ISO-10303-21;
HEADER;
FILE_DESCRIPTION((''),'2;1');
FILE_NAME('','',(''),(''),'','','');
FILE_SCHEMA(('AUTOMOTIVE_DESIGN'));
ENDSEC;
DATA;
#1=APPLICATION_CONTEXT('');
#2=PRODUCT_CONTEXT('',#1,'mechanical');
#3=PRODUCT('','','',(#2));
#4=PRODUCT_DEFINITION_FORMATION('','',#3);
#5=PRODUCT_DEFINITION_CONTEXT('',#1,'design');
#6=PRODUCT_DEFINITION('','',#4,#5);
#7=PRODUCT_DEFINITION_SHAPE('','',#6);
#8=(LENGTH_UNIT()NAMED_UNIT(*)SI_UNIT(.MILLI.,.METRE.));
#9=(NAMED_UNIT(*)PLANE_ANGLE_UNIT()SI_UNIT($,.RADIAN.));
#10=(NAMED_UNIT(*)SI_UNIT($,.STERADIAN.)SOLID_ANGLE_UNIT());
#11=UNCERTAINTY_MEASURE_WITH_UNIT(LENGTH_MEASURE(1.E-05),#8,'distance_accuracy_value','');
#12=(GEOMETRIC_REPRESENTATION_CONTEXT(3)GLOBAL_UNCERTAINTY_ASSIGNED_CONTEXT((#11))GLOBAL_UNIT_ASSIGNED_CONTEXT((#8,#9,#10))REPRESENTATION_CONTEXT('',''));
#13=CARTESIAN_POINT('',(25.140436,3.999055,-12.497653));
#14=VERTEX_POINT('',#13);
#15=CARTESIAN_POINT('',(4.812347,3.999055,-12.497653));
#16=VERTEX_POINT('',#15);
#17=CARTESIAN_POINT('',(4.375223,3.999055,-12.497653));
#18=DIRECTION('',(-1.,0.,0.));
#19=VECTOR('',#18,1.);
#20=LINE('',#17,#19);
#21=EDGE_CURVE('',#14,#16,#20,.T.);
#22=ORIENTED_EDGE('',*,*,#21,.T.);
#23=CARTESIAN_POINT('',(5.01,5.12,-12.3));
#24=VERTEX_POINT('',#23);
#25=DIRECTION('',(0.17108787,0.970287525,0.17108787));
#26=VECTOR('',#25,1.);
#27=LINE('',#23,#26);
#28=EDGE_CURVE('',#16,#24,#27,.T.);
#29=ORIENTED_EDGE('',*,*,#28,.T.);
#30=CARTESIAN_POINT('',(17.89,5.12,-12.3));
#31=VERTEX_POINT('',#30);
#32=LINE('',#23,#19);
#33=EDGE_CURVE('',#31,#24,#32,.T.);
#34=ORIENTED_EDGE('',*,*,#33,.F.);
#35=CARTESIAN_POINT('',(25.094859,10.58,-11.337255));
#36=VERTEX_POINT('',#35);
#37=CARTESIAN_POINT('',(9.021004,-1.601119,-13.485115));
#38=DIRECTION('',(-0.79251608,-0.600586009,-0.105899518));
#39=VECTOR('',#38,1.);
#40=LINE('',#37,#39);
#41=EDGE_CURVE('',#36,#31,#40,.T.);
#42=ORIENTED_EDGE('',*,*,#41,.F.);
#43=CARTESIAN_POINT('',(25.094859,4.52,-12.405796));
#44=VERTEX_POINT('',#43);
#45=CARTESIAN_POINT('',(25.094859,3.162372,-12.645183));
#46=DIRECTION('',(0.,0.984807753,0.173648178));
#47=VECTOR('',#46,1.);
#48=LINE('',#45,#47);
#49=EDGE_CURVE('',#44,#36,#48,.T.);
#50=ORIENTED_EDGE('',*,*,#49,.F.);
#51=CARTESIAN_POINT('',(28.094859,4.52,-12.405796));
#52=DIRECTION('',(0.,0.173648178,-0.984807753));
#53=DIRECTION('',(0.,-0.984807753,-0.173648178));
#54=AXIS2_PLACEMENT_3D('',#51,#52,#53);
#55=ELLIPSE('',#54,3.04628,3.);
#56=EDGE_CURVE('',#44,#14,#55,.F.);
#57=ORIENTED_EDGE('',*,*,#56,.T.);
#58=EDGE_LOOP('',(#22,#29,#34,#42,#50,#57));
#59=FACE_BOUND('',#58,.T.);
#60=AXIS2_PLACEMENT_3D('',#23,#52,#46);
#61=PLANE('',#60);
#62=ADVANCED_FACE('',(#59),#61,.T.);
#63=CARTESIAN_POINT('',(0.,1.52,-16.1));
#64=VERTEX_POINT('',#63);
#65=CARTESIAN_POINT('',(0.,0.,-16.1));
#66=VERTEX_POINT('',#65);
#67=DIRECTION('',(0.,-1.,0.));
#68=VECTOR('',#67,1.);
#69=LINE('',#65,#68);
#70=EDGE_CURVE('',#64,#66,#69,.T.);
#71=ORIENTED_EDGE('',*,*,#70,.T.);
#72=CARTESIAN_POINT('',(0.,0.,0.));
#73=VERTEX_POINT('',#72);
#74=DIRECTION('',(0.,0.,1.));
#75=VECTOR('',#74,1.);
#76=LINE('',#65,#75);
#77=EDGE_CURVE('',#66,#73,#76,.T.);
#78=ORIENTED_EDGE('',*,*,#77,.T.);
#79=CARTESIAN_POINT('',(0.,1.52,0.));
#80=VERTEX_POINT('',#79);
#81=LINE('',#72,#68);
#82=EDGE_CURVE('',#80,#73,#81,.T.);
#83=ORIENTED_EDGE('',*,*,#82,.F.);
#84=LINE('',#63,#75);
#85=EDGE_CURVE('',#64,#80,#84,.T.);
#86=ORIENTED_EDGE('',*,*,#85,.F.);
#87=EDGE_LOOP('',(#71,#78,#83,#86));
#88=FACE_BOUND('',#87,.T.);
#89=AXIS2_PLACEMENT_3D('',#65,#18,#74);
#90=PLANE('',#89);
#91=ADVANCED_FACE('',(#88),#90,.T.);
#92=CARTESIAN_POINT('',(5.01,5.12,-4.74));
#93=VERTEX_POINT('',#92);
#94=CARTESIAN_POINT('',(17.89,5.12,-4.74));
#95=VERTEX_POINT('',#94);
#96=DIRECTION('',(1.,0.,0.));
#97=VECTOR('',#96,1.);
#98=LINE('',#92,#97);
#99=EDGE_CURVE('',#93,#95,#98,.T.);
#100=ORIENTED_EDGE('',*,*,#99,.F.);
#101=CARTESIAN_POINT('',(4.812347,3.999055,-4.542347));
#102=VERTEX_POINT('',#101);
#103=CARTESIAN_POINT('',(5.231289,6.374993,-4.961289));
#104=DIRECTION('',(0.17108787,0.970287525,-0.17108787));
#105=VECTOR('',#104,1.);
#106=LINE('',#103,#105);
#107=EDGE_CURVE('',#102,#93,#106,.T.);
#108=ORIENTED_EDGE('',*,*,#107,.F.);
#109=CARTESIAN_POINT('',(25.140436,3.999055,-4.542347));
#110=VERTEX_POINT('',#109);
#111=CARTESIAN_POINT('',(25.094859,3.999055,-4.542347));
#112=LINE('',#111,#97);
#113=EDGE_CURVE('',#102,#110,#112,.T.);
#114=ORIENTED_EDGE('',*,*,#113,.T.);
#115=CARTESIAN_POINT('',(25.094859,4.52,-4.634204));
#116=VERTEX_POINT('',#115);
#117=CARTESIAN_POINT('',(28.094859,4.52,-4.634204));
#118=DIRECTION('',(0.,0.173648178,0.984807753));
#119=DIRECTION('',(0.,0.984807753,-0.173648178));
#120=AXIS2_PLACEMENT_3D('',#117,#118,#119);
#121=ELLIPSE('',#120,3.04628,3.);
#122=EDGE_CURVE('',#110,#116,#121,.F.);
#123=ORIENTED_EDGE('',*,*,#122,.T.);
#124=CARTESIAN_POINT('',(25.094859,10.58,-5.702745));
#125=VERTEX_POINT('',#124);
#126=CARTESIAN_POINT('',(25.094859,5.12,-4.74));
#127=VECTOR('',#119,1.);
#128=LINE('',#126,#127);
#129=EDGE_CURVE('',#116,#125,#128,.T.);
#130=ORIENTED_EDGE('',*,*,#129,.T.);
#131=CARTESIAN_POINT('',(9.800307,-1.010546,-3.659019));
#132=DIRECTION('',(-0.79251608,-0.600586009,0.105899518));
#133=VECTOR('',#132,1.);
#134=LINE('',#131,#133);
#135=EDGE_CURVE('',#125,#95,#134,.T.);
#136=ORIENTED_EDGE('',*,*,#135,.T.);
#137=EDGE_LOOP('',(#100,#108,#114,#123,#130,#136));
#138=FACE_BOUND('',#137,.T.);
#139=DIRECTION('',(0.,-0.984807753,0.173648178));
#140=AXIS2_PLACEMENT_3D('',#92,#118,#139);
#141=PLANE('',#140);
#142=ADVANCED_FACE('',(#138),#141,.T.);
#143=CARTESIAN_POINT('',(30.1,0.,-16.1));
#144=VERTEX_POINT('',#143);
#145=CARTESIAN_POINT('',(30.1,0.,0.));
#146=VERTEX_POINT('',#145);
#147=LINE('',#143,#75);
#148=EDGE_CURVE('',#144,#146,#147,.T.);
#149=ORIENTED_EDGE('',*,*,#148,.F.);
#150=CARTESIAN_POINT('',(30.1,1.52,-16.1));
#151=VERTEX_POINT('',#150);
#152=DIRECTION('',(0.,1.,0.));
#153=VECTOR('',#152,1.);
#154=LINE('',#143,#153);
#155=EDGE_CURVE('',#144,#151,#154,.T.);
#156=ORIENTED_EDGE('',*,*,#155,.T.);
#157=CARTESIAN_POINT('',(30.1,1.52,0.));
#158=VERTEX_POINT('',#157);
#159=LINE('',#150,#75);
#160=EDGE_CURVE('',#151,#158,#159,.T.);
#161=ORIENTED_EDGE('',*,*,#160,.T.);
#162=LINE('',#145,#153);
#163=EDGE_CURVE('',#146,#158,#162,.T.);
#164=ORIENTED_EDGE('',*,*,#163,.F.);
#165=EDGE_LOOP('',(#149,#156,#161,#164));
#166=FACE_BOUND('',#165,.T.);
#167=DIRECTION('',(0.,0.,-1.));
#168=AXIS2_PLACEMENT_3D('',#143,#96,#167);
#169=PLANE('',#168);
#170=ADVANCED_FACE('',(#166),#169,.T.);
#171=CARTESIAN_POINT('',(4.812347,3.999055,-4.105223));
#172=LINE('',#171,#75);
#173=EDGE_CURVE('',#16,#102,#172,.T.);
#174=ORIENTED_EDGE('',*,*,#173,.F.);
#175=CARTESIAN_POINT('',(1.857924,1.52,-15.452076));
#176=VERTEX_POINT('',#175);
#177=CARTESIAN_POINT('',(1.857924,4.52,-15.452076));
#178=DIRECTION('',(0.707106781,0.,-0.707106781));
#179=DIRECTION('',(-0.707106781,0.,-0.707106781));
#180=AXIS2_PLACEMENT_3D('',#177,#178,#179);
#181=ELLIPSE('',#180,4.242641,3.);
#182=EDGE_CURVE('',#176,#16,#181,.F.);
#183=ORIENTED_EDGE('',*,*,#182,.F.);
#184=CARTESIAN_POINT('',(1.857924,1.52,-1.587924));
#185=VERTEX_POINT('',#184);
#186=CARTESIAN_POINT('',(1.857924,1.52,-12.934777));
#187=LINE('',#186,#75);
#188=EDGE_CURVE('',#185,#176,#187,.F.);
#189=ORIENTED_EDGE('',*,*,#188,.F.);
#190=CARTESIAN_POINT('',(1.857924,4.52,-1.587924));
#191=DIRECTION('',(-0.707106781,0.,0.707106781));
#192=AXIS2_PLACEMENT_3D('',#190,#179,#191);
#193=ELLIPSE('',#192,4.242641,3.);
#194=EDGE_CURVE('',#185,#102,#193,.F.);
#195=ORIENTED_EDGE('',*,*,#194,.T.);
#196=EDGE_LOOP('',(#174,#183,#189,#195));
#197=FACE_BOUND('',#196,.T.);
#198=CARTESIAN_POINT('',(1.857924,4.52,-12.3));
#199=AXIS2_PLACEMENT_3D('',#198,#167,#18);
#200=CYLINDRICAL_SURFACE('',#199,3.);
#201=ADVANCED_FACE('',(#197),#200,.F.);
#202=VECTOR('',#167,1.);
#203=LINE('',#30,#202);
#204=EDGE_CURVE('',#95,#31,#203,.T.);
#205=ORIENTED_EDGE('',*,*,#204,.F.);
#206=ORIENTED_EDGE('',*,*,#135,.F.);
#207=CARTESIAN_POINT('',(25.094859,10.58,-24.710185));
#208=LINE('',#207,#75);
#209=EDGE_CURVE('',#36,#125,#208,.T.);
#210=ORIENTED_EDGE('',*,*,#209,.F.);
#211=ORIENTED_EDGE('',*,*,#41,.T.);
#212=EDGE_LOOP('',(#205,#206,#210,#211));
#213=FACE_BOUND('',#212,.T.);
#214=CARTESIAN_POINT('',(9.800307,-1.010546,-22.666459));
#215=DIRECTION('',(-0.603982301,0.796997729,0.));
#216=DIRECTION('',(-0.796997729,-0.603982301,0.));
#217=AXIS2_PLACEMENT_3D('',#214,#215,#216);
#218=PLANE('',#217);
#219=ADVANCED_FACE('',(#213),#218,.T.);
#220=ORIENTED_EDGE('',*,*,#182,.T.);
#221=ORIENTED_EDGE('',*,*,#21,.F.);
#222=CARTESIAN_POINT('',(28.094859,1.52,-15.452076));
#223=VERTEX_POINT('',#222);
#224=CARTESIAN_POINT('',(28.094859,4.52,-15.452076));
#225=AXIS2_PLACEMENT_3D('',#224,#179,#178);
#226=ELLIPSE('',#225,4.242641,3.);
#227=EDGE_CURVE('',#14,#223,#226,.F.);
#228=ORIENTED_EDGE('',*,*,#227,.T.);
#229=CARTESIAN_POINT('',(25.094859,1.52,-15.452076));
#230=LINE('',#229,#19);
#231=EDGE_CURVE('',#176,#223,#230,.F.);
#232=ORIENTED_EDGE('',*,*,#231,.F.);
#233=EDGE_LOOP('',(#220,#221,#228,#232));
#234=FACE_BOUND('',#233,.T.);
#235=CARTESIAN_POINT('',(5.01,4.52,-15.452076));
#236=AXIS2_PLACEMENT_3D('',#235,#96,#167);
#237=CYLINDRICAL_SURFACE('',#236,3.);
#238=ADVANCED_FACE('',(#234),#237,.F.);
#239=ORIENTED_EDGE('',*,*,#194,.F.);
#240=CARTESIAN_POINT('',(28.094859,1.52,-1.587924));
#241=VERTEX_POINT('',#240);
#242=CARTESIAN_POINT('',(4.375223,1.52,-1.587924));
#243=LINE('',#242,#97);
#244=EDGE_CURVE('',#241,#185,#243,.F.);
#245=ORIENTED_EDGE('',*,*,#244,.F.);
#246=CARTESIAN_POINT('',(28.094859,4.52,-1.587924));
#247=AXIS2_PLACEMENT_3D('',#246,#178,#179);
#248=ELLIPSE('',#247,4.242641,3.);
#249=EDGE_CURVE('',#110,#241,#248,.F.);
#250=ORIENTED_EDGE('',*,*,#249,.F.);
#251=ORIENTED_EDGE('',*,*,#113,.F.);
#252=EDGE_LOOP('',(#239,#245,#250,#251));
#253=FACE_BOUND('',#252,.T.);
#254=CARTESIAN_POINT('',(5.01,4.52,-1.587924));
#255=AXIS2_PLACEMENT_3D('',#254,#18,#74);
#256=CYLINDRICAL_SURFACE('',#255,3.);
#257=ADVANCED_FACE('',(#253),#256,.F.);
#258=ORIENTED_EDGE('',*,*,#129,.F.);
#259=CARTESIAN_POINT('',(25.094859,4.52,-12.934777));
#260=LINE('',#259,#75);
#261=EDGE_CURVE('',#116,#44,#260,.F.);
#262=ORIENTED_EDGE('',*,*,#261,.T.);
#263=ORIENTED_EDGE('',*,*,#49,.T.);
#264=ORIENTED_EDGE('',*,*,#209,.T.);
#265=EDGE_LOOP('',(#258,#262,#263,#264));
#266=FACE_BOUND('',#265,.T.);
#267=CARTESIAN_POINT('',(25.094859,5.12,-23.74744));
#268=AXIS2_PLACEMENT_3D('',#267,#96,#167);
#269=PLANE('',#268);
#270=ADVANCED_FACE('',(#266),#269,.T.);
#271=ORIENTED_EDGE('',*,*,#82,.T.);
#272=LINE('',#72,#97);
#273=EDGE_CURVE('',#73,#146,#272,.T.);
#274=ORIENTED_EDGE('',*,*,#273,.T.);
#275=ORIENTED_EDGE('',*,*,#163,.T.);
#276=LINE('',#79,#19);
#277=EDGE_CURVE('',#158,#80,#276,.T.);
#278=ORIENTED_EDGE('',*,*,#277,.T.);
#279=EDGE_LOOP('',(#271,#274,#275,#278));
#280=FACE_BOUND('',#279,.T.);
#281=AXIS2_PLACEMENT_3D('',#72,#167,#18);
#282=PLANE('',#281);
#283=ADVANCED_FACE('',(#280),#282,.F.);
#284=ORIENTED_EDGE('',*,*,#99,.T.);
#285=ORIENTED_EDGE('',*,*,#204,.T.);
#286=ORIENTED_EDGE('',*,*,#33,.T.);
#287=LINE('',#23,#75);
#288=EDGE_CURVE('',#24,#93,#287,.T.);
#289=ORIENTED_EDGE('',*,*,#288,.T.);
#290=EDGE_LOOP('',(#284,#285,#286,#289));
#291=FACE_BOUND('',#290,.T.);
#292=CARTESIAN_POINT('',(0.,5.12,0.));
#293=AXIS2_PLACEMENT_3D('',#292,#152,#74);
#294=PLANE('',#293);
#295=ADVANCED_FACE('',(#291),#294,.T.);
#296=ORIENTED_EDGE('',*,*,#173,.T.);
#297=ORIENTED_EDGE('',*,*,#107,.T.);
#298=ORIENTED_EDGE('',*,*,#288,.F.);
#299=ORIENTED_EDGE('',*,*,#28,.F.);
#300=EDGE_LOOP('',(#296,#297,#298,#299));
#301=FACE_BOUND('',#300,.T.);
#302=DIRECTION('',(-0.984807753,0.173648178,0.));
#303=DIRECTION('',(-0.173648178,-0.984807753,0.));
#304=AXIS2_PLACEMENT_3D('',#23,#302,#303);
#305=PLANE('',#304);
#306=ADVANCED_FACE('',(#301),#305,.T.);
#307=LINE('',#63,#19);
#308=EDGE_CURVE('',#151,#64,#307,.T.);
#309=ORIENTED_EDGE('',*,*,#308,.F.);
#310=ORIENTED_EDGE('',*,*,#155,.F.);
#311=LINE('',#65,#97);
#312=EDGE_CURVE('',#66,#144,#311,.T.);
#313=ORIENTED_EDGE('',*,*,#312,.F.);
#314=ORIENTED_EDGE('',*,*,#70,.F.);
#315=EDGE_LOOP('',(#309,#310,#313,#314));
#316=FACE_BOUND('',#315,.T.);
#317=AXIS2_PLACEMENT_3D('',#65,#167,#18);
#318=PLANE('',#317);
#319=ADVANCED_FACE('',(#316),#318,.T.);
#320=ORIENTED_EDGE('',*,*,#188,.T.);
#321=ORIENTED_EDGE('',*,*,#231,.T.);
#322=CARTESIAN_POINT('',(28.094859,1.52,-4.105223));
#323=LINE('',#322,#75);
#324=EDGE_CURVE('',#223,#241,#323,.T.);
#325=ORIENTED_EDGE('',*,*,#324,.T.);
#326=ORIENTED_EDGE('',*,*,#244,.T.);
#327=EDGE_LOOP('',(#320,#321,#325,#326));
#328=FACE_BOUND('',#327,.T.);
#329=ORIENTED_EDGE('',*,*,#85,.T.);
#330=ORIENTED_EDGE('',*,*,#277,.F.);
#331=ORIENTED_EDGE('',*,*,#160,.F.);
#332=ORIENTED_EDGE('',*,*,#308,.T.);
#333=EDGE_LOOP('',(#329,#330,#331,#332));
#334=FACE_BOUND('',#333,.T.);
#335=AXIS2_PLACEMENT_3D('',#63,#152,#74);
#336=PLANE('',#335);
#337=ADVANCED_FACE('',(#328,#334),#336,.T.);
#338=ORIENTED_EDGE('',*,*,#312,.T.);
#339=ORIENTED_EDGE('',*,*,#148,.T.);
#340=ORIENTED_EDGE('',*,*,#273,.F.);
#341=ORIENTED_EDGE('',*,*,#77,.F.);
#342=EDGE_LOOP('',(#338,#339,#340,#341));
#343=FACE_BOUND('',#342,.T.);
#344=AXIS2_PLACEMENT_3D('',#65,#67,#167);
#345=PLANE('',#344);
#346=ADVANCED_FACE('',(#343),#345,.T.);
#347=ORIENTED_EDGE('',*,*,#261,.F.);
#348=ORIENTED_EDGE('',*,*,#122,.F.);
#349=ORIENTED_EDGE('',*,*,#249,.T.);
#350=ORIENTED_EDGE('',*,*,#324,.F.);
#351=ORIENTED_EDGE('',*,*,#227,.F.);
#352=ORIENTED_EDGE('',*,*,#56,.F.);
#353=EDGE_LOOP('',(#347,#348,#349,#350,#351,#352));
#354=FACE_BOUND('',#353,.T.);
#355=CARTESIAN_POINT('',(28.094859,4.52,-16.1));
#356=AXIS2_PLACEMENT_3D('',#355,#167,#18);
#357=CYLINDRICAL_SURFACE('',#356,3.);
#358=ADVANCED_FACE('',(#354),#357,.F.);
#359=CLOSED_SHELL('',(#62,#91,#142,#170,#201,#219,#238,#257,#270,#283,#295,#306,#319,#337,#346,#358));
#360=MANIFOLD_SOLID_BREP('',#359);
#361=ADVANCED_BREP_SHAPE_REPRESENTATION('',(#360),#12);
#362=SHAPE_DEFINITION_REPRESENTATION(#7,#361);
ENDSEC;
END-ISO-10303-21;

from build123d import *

# Parameters (mm, degrees)
SKETCH1_W             = 30.1
SKETCH1_H             = 1.52
BOSS_EXTRUDE1_DEPTH   = 16.1
BOSS_EXTRUDE2_START   = 3.6
SKETCH2_W             = 12.88
SKETCH2_H             = 7.56
BOSS_EXTRUDE2_DEPTH   = 3.68
BOSS_EXTRUDE2_DRAFT   = 10
BOSS_EXTRUDE3_START   = -11.337254685
BOSS_EXTRUDE3_DEPTH   = 5.63450937
BOSS_EXTRUDE3_START_2 = 17.89
BOSS_EXTRUDE3_2_DEPTH = 7.204859471
BOSS_EXTRUDE3_START_3 = 1
BOSS_EXTRUDE3_3_DEPTH = 5.72461499
FILLET1_R             = 3


with BuildPart() as part:
    # Sketch1 → Boss-Extrude1 (new body)
    with BuildSketch(Plane.XY):
        with Locations((15.05, 0.76)):
            Rectangle(SKETCH1_W, SKETCH1_H)
    extrude(amount=-BOSS_EXTRUDE1_DEPTH)


with BuildPart() as boss_extrude2_tool:
    # Sketch2 → Boss-Extrude2 (with draft: the straight prism first)
    with BuildSketch(Plane(origin=(0, 1.52, 0), x_dir=(1, 0, 0), z_dir=(0, 1, 0)).offset(BOSS_EXTRUDE2_START)):
        with Locations((11.45, 8.52)):
            Rectangle(SKETCH2_W, SKETCH2_H)
    extrude(amount=-BOSS_EXTRUDE2_DEPTH)
    # Boss-Extrude2: the draft: its side faces are tilted about the plane it starts from
    boss_extrude2_sides = [boss_extrude2_tool.faces().sort_by_distance(p)[0] for p in [
        (5.01, 3.28, -8.52),
        (11.45, 3.28, -4.74),
        (17.89, 3.28, -8.52),
        (11.45, 3.28, -12.3),
    ]]
    draft(boss_extrude2_sides, Plane(origin=(0, 1.52, 0), x_dir=(1, 0, 0), z_dir=(0, 1, 0)).offset(BOSS_EXTRUDE2_START), BOSS_EXTRUDE2_DRAFT)


with BuildPart() as part_1:
    add(part.part)

    # Boss-Extrude2: add boss_extrude2_tool
    add(boss_extrude2_tool.part)

    # Boss-Extrude3: read off the stored shape, not the designer's step
    # Boss-Extrude3 outline → Boss-Extrude3 (add)
    with BuildSketch(Plane.XY.offset(BOSS_EXTRUDE3_START)):
        Polygon((18.524777131, 1.52), (25.094859471, 1.52), (25.094859471, 10.58), (17.89, 5.12), align=None)
    extrude(amount=BOSS_EXTRUDE3_DEPTH)

    # Boss-Extrude3 2 outline → Boss-Extrude3 2 (add)
    with BuildSketch(Plane.YZ.offset(BOSS_EXTRUDE3_START_2)):
        Polygon((1.52, -11.337254685), (1.52, -12.934777131), (10.58, -11.337254685), align=None)
        Polygon((1.52, -4.105222869), (1.52, -5.702745315), (10.58, -5.702745315), align=None)
    extrude(amount=BOSS_EXTRUDE3_2_DEPTH)

    # Boss-Extrude3 3 outline → Boss-Extrude3 3 (cut)
    with BuildSketch(Plane(origin=(0, 0, 0), x_dir=(0.7969977291170371, 0.6039823008849562, 0), z_dir=(0.6039823008849562, -0.7969977291170373, 0)).offset(BOSS_EXTRUDE3_START_3)):
        Polygon((26.390678754, -11.337254685), (26.390678754, -5.702745315), (17.350678754, -4.74), (17.350678754, -12.3), align=None)
    extrude(amount=BOSS_EXTRUDE3_3_DEPTH, mode=Mode.SUBTRACT)

    # Fillet1
    fillet1_edges = [part_1.edges().sort_by_distance(p)[0] for p in [
        (11.45, 1.52, -4.105222869),
        (11.45, 1.52, -12.934777131),
        (4.375222869, 1.52, -8.52),
        (25.094859471, 1.52, -8.52),
    ]]
    fillet(fillet1_edges, radius=FILLET1_R)


solid = part_1.part
